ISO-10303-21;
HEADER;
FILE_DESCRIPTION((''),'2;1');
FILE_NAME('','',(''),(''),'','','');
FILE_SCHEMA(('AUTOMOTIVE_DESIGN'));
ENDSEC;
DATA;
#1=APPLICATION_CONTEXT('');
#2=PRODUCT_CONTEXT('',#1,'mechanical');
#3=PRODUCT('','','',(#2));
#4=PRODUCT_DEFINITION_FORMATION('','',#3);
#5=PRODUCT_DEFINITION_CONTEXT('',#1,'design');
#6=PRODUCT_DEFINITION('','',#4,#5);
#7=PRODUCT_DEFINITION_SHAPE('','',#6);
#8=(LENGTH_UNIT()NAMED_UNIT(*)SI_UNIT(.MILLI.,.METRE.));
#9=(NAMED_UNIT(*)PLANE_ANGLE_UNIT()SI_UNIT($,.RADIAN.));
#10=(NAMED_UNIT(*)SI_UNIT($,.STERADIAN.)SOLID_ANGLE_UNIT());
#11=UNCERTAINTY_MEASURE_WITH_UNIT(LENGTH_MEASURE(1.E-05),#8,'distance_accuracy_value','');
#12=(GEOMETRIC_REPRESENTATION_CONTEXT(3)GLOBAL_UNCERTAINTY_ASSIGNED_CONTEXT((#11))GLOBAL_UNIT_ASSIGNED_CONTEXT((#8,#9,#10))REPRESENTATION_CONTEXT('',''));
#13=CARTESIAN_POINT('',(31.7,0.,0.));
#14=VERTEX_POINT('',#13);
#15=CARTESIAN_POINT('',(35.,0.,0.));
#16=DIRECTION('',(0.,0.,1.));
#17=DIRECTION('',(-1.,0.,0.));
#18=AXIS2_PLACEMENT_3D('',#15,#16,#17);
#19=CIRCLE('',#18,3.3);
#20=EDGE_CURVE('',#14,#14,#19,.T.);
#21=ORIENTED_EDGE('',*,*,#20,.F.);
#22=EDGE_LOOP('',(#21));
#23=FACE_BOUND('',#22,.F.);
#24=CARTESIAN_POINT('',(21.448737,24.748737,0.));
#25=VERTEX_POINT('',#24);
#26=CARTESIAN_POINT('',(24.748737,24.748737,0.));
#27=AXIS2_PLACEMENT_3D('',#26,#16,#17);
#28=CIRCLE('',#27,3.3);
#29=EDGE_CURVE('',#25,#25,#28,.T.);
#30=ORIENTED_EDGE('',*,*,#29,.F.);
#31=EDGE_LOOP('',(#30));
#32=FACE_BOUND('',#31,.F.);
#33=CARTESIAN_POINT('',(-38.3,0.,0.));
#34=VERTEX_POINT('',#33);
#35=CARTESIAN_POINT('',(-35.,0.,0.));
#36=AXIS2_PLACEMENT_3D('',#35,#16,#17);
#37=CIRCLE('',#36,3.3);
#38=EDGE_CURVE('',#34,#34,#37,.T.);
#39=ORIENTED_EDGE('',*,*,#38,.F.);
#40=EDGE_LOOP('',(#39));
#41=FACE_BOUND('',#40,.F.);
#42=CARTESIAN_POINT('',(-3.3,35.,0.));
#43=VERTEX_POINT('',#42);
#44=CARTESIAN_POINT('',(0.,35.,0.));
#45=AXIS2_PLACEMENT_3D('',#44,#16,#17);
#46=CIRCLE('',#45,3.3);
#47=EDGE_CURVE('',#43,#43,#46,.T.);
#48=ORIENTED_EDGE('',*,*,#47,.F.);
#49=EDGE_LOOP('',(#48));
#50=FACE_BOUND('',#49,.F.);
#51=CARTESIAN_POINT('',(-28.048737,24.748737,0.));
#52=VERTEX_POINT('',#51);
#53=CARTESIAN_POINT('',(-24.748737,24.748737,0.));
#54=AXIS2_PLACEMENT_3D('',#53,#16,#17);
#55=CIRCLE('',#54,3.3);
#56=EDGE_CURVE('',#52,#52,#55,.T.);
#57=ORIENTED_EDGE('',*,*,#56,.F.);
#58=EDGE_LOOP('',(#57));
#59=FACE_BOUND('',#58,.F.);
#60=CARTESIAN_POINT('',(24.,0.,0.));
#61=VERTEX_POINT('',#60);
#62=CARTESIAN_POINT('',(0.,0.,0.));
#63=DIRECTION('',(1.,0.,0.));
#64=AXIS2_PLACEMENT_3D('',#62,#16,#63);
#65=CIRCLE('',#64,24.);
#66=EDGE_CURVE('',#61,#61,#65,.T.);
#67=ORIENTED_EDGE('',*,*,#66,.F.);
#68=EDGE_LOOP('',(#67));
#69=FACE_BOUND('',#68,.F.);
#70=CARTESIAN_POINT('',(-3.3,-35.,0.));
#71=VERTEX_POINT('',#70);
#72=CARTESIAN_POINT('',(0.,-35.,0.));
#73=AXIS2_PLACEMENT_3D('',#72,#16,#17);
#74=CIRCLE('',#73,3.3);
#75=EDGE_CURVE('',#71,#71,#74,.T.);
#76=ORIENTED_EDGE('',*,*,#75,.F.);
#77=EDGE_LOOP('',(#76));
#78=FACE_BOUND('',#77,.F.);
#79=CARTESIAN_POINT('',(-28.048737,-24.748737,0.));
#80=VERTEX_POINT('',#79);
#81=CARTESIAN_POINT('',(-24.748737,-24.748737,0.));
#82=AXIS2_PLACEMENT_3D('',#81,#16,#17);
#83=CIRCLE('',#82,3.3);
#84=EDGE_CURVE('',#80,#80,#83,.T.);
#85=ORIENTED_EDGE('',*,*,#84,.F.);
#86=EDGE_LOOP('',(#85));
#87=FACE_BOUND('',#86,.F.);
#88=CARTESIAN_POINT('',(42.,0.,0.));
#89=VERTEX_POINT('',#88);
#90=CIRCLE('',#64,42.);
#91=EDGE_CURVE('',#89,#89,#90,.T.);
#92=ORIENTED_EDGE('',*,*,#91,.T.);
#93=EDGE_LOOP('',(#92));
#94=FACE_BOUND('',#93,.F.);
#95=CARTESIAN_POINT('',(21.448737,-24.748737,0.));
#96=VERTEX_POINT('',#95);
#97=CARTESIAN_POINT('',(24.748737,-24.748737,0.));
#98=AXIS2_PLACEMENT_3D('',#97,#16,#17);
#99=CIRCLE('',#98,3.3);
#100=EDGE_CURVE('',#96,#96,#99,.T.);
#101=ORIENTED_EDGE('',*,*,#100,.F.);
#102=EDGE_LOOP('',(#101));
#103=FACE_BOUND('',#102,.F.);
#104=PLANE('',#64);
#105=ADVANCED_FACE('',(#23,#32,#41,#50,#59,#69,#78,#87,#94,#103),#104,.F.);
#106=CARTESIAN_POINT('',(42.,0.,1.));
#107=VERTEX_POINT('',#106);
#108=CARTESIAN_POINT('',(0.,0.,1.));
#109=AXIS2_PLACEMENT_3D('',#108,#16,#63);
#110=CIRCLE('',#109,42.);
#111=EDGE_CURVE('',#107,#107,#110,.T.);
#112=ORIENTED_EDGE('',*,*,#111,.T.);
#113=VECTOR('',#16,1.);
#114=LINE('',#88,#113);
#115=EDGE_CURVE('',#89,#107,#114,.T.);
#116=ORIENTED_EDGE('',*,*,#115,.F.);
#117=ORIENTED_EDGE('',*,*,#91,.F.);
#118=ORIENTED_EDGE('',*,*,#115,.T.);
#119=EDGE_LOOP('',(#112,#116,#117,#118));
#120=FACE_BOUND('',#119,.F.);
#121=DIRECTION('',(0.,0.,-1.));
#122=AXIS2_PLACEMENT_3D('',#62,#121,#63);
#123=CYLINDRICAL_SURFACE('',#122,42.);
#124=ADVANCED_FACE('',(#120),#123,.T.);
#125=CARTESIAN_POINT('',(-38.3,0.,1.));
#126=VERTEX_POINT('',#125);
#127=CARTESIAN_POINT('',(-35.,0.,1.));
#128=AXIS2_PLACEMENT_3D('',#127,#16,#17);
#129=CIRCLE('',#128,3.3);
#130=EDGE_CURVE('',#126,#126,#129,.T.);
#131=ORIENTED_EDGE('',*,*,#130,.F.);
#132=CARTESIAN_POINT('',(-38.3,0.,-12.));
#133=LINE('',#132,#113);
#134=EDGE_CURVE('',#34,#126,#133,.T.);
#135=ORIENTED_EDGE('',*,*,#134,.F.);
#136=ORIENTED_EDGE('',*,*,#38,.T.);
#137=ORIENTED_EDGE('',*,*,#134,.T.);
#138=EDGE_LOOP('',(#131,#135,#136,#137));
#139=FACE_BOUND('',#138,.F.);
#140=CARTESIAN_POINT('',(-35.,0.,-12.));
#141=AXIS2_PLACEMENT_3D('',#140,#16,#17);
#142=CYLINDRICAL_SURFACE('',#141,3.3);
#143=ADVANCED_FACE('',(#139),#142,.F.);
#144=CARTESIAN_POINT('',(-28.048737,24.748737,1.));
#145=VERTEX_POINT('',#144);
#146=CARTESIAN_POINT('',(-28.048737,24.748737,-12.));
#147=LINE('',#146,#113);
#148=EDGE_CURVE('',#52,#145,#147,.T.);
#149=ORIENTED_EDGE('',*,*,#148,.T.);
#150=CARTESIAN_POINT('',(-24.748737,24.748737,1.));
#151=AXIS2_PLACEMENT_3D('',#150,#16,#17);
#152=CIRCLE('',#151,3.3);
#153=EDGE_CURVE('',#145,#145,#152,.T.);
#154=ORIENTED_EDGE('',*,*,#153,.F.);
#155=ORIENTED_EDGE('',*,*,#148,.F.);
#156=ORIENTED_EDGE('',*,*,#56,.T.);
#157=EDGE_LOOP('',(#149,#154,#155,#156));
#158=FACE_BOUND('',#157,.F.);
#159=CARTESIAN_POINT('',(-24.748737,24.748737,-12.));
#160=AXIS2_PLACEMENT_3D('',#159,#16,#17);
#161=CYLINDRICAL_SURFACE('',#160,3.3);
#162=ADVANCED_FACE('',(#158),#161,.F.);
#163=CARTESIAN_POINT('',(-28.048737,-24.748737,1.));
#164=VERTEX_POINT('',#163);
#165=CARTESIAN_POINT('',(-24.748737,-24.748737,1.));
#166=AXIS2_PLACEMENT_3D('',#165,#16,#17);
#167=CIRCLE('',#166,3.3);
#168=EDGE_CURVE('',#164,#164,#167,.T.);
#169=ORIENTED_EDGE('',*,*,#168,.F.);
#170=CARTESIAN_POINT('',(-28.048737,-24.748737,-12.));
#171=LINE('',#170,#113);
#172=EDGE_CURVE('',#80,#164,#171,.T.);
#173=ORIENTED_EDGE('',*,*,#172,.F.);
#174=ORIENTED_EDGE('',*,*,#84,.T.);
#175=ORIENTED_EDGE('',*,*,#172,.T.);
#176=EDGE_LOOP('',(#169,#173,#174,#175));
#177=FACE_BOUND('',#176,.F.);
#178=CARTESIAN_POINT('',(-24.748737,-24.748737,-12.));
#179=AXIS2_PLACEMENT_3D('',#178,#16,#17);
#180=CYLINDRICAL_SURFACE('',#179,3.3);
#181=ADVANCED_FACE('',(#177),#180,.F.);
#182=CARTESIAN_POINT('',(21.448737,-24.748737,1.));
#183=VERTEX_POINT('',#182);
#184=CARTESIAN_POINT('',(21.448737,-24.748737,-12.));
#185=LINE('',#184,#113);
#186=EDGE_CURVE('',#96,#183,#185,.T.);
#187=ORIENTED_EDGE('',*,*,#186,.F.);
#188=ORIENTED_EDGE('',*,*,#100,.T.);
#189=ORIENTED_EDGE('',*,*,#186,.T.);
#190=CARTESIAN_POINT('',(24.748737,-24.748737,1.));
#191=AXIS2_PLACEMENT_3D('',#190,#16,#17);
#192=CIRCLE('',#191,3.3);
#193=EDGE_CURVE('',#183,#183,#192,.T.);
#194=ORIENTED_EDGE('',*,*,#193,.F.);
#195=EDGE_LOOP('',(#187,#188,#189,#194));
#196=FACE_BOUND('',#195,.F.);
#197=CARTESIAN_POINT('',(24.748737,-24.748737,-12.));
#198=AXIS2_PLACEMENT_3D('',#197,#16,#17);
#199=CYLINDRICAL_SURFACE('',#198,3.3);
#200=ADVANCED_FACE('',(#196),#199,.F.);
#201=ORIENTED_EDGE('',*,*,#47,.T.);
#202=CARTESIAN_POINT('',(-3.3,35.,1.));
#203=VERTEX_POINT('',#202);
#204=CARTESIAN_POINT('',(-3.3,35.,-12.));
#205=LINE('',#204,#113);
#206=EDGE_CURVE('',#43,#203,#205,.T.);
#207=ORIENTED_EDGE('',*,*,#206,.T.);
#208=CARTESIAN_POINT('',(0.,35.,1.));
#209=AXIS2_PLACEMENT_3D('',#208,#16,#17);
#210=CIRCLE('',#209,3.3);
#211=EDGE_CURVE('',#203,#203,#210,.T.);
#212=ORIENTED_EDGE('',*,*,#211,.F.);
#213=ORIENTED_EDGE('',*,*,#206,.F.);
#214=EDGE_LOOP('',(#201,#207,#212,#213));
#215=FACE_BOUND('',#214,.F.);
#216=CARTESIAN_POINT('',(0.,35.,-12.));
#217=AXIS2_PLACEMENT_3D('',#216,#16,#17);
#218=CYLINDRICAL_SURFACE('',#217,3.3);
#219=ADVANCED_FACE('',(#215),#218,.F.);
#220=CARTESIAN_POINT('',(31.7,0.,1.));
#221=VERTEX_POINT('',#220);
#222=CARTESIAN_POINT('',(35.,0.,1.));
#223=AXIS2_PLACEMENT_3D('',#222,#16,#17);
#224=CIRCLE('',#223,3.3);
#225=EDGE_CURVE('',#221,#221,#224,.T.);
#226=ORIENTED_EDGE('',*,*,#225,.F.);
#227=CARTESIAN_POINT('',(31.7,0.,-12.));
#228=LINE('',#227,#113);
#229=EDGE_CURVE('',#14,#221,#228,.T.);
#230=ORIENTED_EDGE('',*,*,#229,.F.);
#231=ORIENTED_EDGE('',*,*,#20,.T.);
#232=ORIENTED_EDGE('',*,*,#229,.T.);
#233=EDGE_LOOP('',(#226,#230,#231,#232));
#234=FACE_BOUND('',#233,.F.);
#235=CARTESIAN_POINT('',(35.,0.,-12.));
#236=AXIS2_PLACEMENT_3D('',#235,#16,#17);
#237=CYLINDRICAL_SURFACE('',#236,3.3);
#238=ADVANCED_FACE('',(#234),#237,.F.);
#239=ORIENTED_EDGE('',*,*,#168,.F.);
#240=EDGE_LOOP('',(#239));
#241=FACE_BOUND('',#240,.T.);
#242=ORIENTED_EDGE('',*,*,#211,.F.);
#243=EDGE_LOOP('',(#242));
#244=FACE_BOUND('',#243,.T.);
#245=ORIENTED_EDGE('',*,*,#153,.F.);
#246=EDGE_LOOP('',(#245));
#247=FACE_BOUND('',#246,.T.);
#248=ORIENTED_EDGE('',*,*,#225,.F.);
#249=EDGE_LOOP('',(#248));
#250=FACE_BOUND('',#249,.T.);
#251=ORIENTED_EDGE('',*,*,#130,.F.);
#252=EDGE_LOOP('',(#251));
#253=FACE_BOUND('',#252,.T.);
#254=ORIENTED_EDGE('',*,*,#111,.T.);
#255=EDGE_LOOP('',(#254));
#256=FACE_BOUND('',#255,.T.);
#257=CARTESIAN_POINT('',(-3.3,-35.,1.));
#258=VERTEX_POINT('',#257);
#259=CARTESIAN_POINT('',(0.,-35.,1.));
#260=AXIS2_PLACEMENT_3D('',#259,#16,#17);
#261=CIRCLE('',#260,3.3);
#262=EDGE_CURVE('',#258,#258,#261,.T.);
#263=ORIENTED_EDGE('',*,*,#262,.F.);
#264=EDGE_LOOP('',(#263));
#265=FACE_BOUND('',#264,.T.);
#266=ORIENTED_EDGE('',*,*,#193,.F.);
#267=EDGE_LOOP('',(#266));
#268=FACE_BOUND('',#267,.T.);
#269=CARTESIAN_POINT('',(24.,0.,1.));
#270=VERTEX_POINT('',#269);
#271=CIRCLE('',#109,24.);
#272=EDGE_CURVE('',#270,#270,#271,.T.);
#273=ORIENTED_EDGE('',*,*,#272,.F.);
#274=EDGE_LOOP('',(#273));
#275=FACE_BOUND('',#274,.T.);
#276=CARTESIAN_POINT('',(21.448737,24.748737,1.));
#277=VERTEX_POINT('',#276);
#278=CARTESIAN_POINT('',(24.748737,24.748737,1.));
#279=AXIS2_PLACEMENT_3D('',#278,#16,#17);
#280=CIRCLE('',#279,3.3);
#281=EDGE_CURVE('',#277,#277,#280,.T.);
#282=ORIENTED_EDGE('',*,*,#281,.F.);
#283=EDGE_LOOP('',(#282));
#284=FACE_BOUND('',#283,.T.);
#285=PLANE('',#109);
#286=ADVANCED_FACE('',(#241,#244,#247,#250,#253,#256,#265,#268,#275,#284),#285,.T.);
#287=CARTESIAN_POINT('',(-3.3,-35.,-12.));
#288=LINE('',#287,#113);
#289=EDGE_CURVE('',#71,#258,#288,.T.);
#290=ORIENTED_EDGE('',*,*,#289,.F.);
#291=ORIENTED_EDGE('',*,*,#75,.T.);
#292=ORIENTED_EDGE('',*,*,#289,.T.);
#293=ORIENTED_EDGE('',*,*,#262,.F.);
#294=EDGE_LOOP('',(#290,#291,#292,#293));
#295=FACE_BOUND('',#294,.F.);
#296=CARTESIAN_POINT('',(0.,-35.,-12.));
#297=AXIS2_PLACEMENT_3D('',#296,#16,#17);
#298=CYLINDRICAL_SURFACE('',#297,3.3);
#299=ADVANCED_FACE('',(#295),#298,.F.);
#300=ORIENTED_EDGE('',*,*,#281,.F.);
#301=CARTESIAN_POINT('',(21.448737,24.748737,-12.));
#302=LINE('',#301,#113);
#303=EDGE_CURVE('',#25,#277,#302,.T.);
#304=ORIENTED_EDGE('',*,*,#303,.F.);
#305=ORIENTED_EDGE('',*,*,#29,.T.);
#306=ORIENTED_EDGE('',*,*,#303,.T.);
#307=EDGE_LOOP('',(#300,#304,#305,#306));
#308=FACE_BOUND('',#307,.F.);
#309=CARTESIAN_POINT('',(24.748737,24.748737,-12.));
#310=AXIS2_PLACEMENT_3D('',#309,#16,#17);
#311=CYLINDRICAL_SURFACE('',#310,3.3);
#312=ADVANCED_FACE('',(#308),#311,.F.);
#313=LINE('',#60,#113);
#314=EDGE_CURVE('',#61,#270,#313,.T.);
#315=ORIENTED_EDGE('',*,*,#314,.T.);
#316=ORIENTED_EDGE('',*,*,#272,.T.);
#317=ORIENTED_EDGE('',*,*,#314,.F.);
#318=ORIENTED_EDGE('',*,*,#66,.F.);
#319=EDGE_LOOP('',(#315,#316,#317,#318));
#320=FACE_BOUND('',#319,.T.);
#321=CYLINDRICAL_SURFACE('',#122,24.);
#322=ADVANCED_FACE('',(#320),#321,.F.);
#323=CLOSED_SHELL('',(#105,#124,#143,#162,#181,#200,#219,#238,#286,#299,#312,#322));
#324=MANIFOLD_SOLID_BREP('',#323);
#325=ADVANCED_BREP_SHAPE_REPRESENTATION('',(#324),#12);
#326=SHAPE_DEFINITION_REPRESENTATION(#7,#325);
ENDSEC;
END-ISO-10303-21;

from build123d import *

# Parameters (mm, degrees)
F0_R     = 42
F0_R_2   = 24
F1_DEPTH = 1
F2_D     = 6.6
F2_DEPTH = 12
F2_TIP   = 1.9828400428


# Not quite as in the source:
# - a feature names something its author has since deleted; it is built from what else it names


with BuildPart() as f1:
    # F0 (on Top) → F1 (new body)
    with BuildSketch(Plane.XY):
        Circle(F0_R)
        Circle(F0_R_2, mode=Mode.SUBTRACT)
    extrude(amount=F1_DEPTH)

    # F2
    with Locations(Plane(origin=(0, 0, 0), x_dir=(1, 0, 0), z_dir=(0, 0, -1))):
        with Locations((-24.7487373415, 24.7487373415), (0, 35), (24.7487373415, 24.7487373415), (35, 0), (24.7487373415, -24.7487373415), (0, -35), (-24.7487373415, -24.7487373415), (-35, 0)):
            Hole(F2_D / 2, depth=F2_DEPTH)
            with Locations((0, 0, -(F2_DEPTH + F2_TIP / 2))):  # 118° drill point
                Cone(0, F2_D / 2, F2_TIP, mode=Mode.SUBTRACT)


solid = f1.part
